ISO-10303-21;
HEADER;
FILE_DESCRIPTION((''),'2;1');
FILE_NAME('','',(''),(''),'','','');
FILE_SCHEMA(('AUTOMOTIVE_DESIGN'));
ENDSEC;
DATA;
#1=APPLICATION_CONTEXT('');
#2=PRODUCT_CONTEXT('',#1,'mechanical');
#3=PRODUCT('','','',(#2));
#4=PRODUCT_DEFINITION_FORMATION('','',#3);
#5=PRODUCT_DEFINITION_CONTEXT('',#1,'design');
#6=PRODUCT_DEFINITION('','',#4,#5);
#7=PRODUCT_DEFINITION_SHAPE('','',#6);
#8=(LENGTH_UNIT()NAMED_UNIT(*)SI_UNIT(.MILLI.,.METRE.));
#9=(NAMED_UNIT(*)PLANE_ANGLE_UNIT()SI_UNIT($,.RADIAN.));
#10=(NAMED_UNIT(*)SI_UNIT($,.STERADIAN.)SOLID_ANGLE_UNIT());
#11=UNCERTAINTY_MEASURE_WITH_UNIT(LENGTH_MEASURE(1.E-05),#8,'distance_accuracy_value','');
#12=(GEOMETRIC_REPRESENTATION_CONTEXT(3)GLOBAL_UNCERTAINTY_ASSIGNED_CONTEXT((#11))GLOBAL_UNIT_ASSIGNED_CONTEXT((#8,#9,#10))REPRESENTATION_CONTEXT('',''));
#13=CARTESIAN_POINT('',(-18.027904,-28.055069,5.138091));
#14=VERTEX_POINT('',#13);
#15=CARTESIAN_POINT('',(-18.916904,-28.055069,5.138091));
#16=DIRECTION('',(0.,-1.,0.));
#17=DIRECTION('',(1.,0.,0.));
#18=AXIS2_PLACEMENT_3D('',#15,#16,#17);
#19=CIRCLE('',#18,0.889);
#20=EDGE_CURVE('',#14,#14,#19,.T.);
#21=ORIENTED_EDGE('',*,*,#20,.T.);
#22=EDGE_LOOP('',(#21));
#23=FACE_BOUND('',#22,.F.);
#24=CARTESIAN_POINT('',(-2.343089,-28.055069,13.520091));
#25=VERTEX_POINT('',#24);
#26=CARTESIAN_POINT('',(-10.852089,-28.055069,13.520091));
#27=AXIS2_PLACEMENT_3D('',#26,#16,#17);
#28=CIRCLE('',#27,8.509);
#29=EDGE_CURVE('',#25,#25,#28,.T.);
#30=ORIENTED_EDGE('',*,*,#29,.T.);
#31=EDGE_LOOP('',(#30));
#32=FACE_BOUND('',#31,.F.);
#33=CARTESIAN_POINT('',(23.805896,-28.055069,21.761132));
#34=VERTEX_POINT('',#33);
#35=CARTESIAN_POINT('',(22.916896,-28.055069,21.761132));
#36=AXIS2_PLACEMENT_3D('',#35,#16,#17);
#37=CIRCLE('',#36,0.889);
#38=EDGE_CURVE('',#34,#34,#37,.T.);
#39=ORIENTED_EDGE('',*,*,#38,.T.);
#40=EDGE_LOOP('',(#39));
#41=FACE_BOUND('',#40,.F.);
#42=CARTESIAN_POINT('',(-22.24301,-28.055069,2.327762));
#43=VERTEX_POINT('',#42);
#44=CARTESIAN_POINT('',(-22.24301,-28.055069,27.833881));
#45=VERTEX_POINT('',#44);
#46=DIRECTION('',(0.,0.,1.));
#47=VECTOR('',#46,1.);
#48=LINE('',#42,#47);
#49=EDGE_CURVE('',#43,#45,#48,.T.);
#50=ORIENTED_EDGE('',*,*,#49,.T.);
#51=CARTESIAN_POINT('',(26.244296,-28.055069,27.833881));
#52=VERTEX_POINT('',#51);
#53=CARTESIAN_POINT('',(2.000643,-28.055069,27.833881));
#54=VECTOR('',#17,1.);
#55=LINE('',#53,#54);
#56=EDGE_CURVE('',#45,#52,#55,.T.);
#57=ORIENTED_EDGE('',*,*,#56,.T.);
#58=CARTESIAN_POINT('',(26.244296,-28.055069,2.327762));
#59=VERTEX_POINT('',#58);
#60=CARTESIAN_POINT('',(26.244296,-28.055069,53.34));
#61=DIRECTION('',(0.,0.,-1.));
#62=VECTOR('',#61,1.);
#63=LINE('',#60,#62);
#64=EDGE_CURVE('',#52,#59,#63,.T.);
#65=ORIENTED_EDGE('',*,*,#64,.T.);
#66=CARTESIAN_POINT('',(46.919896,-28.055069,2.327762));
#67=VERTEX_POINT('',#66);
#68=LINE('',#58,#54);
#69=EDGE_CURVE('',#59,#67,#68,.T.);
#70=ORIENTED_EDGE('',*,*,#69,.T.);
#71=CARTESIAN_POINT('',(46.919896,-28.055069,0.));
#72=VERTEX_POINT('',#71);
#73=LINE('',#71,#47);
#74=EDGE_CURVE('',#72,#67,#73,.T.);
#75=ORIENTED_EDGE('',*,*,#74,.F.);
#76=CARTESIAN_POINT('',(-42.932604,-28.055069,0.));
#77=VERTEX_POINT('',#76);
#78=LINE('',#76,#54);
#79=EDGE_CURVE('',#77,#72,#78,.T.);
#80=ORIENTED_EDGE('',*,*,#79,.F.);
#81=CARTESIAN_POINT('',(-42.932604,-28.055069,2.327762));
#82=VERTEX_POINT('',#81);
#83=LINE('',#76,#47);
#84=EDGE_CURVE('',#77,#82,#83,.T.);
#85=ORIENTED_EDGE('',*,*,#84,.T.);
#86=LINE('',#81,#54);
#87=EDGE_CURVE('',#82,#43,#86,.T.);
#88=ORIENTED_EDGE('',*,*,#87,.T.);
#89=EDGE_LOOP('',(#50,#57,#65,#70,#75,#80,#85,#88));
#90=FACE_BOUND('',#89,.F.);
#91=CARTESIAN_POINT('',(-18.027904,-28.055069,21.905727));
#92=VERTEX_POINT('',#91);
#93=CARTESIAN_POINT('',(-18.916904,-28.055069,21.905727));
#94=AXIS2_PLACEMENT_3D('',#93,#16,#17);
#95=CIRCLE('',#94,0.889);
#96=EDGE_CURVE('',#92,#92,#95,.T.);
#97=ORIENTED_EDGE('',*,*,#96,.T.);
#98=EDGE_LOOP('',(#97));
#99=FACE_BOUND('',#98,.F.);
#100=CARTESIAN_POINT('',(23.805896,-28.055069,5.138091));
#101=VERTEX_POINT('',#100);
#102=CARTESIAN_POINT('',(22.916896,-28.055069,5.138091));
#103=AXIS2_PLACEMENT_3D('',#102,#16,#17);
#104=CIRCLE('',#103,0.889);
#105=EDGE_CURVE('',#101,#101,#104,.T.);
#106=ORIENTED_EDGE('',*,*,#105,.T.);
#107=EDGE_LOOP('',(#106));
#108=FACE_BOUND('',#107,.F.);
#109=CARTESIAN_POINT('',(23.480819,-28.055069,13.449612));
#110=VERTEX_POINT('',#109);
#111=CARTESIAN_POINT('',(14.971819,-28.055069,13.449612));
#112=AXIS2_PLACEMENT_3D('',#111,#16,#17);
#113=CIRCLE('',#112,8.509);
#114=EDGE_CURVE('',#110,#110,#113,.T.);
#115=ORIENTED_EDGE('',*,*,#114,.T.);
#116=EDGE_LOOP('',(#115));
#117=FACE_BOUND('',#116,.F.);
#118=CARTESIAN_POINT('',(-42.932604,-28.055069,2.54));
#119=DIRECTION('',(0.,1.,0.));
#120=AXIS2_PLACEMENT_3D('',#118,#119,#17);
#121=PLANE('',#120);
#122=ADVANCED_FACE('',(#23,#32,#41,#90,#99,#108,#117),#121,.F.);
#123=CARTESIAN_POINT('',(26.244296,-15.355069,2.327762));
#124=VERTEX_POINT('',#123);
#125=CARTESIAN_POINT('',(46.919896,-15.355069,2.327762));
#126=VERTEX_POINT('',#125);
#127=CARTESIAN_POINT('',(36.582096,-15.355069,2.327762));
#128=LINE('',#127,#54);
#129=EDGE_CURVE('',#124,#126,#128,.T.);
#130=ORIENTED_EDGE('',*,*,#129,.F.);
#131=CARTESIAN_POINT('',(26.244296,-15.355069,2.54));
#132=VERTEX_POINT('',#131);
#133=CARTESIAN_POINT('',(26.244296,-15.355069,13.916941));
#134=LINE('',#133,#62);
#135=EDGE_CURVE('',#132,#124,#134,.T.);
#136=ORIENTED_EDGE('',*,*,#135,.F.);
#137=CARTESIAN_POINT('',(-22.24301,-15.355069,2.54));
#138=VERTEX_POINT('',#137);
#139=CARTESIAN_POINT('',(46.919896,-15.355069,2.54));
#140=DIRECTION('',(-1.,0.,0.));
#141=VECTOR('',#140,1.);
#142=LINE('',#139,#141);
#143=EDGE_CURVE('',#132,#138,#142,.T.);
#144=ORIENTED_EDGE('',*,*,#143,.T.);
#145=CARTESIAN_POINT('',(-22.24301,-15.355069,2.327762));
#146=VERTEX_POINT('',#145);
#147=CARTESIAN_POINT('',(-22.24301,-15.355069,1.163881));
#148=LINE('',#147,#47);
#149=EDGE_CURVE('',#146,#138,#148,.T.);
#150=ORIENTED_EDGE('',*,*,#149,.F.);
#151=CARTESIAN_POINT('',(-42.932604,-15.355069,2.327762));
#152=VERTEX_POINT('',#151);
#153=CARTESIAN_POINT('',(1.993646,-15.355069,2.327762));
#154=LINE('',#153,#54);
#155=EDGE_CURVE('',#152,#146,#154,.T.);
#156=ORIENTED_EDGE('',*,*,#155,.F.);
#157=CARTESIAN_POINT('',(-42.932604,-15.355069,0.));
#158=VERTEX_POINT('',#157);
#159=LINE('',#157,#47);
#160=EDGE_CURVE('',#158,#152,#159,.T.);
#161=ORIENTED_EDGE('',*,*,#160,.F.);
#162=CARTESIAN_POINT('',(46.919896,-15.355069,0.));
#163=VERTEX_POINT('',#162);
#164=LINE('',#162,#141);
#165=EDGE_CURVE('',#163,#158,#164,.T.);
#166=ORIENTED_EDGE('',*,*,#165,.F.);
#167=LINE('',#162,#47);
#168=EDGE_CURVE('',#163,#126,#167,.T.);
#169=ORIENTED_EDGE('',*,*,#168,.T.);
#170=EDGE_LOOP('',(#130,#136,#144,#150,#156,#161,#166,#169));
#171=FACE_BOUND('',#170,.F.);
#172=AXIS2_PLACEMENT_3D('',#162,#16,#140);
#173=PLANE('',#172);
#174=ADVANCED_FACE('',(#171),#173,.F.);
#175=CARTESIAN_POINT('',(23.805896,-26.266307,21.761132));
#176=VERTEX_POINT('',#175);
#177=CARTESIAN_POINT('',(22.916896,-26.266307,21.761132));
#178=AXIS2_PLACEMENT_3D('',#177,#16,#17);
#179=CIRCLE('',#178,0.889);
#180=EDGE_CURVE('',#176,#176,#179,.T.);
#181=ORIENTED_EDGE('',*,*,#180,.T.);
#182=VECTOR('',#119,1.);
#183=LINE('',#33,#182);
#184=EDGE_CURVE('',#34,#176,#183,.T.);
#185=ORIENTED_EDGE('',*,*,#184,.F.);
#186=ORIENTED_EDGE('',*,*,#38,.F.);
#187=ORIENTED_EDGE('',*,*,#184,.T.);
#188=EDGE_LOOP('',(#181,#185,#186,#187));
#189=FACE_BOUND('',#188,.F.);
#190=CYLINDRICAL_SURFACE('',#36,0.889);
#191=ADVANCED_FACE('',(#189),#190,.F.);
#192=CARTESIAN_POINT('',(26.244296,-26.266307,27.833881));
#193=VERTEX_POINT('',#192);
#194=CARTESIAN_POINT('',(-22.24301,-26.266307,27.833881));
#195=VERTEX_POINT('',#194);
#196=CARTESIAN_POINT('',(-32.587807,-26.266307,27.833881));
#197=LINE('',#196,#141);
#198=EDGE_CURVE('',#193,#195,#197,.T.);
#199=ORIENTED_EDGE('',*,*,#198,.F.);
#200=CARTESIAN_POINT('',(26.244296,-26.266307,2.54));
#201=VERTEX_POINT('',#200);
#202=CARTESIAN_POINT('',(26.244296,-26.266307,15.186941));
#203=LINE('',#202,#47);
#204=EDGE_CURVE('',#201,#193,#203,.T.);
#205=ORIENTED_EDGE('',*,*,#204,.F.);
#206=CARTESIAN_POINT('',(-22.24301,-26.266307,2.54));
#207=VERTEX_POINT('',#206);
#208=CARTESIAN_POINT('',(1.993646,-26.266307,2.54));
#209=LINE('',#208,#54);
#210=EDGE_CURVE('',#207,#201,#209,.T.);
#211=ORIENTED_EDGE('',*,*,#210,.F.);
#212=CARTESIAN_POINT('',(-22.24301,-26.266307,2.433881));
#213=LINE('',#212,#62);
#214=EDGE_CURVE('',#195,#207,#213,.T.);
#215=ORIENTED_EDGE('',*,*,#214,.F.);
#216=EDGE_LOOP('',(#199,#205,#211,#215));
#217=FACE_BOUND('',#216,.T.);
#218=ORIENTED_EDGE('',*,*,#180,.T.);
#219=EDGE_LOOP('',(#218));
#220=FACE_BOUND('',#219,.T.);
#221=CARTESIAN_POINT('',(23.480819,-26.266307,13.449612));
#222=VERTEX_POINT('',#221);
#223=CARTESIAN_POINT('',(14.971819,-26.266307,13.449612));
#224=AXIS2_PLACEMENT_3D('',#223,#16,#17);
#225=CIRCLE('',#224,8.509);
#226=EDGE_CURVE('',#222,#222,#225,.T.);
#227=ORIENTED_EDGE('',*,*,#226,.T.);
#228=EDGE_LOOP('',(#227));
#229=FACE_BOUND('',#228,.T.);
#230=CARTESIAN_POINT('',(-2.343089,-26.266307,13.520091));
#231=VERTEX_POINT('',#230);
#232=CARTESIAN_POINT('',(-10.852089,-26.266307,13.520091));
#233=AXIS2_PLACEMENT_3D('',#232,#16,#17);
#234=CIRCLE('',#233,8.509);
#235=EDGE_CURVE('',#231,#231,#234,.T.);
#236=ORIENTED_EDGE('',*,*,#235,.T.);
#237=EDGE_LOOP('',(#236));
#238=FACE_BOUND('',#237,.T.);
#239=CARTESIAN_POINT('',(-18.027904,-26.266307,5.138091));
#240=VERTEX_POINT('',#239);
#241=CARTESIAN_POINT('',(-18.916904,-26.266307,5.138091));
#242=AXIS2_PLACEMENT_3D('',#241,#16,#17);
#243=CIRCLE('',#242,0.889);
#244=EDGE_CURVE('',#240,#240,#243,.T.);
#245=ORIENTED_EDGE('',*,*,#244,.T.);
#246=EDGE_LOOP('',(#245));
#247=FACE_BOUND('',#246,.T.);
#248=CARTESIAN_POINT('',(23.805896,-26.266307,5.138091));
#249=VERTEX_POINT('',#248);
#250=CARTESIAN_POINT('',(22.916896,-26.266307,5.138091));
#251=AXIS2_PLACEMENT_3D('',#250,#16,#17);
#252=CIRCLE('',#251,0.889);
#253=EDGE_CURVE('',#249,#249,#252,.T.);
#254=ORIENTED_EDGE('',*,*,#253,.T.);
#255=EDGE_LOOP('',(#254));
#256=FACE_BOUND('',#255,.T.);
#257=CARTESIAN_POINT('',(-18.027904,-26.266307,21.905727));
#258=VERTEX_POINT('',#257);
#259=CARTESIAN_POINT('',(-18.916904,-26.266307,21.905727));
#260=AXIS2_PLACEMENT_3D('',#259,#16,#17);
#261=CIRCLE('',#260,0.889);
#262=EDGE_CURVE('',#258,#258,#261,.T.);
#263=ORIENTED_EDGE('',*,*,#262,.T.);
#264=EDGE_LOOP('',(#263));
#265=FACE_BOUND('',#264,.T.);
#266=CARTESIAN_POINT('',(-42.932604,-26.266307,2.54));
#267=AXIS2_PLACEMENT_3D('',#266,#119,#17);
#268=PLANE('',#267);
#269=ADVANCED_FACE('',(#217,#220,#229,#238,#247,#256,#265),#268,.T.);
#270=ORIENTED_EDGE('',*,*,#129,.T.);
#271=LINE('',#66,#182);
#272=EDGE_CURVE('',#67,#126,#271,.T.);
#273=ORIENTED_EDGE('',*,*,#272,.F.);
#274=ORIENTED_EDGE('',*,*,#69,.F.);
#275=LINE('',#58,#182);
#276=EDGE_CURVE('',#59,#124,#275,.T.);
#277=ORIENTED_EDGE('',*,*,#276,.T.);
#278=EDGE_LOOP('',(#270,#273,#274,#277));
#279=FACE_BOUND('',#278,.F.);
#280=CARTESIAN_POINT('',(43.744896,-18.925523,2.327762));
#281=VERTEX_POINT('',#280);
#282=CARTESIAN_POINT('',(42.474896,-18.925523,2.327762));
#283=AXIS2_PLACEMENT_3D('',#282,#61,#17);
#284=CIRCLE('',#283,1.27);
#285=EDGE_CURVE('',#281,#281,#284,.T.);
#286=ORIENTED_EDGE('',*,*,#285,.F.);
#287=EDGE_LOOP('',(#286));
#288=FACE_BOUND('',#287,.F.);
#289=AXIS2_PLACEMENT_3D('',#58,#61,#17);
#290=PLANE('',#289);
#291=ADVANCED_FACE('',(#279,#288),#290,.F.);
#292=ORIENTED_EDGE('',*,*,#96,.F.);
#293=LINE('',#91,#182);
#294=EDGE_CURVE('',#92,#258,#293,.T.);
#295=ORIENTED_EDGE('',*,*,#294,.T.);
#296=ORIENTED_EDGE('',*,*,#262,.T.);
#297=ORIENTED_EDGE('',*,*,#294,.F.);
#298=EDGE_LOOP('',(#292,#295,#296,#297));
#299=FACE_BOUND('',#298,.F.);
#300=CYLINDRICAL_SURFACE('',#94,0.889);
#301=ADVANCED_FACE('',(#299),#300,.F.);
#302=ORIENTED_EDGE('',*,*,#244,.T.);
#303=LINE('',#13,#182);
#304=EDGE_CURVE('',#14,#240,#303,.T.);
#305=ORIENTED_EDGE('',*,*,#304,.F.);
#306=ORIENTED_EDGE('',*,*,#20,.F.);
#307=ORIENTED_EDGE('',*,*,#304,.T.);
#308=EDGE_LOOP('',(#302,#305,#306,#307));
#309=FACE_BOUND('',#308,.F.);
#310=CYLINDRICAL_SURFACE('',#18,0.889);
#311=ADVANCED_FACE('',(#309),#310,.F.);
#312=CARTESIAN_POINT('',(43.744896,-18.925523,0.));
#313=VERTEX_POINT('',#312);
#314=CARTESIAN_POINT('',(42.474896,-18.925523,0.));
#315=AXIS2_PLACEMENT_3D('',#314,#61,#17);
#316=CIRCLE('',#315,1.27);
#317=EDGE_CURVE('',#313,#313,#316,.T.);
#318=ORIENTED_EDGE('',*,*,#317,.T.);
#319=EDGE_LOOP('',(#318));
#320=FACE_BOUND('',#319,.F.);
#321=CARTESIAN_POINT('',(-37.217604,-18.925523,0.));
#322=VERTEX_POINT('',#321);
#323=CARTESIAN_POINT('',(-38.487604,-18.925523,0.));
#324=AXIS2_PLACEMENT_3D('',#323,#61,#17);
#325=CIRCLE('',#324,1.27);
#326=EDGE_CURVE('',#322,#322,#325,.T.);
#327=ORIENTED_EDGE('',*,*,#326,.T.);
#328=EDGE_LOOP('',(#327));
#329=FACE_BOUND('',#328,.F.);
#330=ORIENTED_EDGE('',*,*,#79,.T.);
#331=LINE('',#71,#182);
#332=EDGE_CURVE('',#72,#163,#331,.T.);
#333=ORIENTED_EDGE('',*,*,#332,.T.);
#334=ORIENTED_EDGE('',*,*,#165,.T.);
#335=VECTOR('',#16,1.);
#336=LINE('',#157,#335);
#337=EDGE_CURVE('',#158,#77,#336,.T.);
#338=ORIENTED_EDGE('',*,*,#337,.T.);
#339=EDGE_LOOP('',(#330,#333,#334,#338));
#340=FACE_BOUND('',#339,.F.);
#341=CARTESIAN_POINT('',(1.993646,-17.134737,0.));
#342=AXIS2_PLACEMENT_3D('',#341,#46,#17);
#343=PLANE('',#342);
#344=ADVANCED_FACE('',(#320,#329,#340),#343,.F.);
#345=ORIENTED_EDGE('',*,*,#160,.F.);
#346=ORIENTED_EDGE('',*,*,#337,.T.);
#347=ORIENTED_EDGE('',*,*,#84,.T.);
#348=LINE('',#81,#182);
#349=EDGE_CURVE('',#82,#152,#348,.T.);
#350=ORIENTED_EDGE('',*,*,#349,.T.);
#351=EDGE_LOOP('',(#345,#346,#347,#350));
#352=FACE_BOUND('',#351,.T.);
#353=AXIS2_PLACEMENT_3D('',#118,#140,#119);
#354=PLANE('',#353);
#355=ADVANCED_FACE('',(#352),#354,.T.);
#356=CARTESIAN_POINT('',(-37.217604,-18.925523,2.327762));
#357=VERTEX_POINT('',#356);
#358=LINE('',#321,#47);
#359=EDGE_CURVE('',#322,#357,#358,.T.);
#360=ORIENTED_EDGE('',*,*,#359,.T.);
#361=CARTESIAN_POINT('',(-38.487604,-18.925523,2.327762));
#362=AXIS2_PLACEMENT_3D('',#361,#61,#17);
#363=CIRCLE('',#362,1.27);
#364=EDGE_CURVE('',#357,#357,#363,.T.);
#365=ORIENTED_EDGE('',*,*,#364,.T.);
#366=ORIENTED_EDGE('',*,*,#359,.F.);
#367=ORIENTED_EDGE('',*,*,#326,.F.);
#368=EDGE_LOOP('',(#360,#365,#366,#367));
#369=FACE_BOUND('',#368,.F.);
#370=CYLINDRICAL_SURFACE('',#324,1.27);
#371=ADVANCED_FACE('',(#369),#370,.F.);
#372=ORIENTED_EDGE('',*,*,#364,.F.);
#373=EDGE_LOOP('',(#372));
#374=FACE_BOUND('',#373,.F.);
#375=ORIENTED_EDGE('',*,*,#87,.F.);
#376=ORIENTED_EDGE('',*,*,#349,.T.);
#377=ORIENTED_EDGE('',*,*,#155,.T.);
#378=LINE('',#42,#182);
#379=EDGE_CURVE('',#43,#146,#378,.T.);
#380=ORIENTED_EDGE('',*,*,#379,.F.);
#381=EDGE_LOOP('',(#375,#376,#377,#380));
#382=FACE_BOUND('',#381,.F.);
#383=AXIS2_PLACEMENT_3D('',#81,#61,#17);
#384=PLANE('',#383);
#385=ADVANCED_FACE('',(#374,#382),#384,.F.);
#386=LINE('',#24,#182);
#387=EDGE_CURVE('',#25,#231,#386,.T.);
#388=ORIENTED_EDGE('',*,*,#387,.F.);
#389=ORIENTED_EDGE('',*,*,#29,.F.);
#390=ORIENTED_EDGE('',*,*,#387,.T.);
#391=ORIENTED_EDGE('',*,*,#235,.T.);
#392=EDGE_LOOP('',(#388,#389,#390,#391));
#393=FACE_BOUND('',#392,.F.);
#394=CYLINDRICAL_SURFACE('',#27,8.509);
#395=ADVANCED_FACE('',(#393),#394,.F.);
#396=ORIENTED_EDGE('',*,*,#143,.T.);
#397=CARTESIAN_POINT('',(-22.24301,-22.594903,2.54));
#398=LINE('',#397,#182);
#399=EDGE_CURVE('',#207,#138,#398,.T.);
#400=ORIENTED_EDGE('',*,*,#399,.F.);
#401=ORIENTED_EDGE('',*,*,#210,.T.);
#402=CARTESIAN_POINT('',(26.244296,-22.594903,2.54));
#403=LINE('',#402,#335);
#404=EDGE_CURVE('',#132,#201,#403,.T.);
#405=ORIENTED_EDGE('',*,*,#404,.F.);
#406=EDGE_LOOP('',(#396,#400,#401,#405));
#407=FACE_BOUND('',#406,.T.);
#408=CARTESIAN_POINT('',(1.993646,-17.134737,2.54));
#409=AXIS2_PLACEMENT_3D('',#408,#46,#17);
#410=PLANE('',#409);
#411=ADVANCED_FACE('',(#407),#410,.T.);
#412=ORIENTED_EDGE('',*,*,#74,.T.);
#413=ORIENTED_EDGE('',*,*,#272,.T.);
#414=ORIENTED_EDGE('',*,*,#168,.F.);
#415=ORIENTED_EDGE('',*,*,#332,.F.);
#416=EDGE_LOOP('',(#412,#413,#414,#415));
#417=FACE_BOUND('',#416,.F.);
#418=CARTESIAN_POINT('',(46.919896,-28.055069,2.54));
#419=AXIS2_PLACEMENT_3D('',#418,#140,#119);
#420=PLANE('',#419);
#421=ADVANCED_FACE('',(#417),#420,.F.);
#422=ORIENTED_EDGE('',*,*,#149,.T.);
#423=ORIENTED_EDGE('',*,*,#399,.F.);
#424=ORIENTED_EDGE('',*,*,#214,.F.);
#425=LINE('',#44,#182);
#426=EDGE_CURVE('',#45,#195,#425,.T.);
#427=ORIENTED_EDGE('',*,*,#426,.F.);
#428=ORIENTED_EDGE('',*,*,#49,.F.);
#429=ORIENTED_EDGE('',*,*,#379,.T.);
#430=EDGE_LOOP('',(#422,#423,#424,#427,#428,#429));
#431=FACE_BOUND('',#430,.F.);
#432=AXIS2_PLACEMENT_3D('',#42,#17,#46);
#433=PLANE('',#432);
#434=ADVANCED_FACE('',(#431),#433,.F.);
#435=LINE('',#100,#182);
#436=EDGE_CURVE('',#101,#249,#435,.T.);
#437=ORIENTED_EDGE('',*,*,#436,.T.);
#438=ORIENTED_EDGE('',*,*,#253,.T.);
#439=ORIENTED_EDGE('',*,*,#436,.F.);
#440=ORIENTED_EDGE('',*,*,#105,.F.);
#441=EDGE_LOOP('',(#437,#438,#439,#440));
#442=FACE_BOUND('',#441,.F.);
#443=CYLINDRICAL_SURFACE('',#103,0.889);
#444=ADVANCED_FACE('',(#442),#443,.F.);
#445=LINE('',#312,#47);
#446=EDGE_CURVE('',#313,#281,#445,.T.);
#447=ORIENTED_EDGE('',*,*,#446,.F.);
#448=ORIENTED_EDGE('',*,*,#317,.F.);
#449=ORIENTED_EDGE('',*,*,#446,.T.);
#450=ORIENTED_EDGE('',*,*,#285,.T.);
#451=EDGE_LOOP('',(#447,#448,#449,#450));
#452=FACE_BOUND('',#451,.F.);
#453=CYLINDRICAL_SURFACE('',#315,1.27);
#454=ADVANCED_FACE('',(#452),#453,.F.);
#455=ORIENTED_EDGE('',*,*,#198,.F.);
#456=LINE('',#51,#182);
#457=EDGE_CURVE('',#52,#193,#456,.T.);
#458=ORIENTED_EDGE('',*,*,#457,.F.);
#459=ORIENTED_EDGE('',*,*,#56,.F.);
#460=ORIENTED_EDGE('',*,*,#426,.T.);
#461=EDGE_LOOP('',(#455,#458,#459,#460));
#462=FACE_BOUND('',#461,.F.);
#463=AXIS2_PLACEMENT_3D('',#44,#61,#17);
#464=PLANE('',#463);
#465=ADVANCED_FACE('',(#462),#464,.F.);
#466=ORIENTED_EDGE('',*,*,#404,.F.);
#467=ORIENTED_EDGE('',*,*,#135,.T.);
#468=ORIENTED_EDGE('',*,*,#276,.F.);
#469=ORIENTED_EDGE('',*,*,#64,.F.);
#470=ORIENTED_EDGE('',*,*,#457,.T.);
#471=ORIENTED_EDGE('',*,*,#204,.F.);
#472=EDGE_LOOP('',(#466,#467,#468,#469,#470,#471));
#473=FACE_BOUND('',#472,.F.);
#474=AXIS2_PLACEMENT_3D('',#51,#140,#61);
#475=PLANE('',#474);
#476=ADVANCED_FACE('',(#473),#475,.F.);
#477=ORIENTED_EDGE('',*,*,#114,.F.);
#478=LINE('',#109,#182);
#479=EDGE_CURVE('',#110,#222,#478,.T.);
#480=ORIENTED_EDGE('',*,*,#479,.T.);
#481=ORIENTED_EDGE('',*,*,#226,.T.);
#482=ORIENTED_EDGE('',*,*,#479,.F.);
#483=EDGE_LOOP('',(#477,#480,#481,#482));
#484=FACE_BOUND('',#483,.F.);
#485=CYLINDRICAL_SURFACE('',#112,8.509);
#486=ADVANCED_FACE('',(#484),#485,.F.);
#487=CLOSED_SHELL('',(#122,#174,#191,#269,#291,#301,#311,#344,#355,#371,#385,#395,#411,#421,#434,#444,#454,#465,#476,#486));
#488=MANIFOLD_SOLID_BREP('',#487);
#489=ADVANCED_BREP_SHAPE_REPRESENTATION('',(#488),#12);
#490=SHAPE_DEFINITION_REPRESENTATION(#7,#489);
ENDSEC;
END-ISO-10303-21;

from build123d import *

# Parameters (mm, degrees)
F1_DEPTH = 2.54
F2_W     = 89.8525
F2_H     = 1.7887626846
F3_DEPTH = 50.8
F4_R     = 8.509
F4_R_2   = 0.889
F4_W     = 48.4873057247
F4_H     = 25.5061189608
F5_DEPTH = 25.4


# Not quite as in the source:
# - a feature names something its author has since deleted; it is built from what else it names


with BuildPart() as f1:
    # F0 (on Top) → F1 (new body)
    with BuildSketch(Plane.XY):
        with BuildLine():
            Line((46.9198958446, -15.3550693233), (-42.9326041554, -15.3550693233))
            Line((-42.9326041554, -15.3550693233), (-42.9326041554, -18.9255226487))
            Line((-42.9326041554, -18.9255226487), (-39.7576041554, -18.9255226487))
            ThreePointArc((-39.7576041554, -18.9255226487), (-38.4876041554, -17.6555226487), (-37.2176041554, -18.9255226487))
            Line((-37.2176041554, -18.9255226487), (41.2048958446, -18.9255226487))
            ThreePointArc((41.2048958446, -18.9255226487), (42.4748958446, -17.6555226487), (43.7448958446, -18.9255226487))
            Line((43.7448958446, -18.9255226487), (46.9198958446, -18.9255226487))
            Line((46.9198958446, -18.9255226487), (46.9198958446, -15.3550693233))
        make_face()
        with BuildLine():
            Line((-39.7576041554, -18.9255226487), (-42.9326041554, -18.9255226487))
            Line((-42.9326041554, -18.9255226487), (-42.9326041554, -28.0550693233))
            Line((-42.9326041554, -28.0550693233), (46.9198958446, -28.0550693233))
            Line((46.9198958446, -28.0550693233), (46.9198958446, -18.9255226487))
            Line((46.9198958446, -18.9255226487), (43.7448958446, -18.9255226487))
            ThreePointArc((43.7448958446, -18.9255226487), (42.4748958446, -20.1955226487), (41.2048958446, -18.9255226487))
            Line((41.2048958446, -18.9255226487), (-37.2176041554, -18.9255226487))
            ThreePointArc((-37.2176041554, -18.9255226487), (-38.4876041554, -20.1955226487), (-39.7576041554, -18.9255226487))
        make_face()
    extrude(amount=F1_DEPTH)

    # F2 (on face) → F3 (join)
    with BuildSketch(Plane.XY.offset(2.54)):
        with Locations((1.9936458446, -27.160687981)):
            Rectangle(F2_W, F2_H)
    extrude(amount=F3_DEPTH)

    # F4 (on face) → F5 (cut)
    with BuildSketch(Plane.XZ.offset(28.0550693233)):
        with Locations((-10.8520889408, 13.5200908117)):
            Circle(F4_R)
        with Locations((14.9718186097, 13.4496116212)):
            Circle(F4_R)
        with Locations((-18.9169041554, 21.9057271107)):
            Circle(F4_R_2)
        with Locations((-18.9169041554, 5.1380908117)):
            Circle(F4_R_2)
        with Locations((22.9168958446, 5.1380908117)):
            Circle(F4_R_2)
        with Locations((22.9168958446, 21.7611324307)):
            Circle(F4_R_2)
        Polygon((46.9198958446, 53.34), (26.2442958446, 53.34), (26.2442958446, 27.8338810392), (26.2442958446, 2.3277620785), (46.9198958446, 2.3277620785), align=None)
        Polygon((-22.2430098802, 53.34), (-42.9326041554, 53.34), (-42.9326041554, 2.3277620785), (-22.2430098802, 2.3277620785), (-22.2430098802, 27.8338810392), align=None)
        with Locations((2.0006429822, 40.5869405196)):
            Rectangle(F4_W, F4_H)
    extrude(amount=-F5_DEPTH, mode=Mode.SUBTRACT)


solid = f1.part
